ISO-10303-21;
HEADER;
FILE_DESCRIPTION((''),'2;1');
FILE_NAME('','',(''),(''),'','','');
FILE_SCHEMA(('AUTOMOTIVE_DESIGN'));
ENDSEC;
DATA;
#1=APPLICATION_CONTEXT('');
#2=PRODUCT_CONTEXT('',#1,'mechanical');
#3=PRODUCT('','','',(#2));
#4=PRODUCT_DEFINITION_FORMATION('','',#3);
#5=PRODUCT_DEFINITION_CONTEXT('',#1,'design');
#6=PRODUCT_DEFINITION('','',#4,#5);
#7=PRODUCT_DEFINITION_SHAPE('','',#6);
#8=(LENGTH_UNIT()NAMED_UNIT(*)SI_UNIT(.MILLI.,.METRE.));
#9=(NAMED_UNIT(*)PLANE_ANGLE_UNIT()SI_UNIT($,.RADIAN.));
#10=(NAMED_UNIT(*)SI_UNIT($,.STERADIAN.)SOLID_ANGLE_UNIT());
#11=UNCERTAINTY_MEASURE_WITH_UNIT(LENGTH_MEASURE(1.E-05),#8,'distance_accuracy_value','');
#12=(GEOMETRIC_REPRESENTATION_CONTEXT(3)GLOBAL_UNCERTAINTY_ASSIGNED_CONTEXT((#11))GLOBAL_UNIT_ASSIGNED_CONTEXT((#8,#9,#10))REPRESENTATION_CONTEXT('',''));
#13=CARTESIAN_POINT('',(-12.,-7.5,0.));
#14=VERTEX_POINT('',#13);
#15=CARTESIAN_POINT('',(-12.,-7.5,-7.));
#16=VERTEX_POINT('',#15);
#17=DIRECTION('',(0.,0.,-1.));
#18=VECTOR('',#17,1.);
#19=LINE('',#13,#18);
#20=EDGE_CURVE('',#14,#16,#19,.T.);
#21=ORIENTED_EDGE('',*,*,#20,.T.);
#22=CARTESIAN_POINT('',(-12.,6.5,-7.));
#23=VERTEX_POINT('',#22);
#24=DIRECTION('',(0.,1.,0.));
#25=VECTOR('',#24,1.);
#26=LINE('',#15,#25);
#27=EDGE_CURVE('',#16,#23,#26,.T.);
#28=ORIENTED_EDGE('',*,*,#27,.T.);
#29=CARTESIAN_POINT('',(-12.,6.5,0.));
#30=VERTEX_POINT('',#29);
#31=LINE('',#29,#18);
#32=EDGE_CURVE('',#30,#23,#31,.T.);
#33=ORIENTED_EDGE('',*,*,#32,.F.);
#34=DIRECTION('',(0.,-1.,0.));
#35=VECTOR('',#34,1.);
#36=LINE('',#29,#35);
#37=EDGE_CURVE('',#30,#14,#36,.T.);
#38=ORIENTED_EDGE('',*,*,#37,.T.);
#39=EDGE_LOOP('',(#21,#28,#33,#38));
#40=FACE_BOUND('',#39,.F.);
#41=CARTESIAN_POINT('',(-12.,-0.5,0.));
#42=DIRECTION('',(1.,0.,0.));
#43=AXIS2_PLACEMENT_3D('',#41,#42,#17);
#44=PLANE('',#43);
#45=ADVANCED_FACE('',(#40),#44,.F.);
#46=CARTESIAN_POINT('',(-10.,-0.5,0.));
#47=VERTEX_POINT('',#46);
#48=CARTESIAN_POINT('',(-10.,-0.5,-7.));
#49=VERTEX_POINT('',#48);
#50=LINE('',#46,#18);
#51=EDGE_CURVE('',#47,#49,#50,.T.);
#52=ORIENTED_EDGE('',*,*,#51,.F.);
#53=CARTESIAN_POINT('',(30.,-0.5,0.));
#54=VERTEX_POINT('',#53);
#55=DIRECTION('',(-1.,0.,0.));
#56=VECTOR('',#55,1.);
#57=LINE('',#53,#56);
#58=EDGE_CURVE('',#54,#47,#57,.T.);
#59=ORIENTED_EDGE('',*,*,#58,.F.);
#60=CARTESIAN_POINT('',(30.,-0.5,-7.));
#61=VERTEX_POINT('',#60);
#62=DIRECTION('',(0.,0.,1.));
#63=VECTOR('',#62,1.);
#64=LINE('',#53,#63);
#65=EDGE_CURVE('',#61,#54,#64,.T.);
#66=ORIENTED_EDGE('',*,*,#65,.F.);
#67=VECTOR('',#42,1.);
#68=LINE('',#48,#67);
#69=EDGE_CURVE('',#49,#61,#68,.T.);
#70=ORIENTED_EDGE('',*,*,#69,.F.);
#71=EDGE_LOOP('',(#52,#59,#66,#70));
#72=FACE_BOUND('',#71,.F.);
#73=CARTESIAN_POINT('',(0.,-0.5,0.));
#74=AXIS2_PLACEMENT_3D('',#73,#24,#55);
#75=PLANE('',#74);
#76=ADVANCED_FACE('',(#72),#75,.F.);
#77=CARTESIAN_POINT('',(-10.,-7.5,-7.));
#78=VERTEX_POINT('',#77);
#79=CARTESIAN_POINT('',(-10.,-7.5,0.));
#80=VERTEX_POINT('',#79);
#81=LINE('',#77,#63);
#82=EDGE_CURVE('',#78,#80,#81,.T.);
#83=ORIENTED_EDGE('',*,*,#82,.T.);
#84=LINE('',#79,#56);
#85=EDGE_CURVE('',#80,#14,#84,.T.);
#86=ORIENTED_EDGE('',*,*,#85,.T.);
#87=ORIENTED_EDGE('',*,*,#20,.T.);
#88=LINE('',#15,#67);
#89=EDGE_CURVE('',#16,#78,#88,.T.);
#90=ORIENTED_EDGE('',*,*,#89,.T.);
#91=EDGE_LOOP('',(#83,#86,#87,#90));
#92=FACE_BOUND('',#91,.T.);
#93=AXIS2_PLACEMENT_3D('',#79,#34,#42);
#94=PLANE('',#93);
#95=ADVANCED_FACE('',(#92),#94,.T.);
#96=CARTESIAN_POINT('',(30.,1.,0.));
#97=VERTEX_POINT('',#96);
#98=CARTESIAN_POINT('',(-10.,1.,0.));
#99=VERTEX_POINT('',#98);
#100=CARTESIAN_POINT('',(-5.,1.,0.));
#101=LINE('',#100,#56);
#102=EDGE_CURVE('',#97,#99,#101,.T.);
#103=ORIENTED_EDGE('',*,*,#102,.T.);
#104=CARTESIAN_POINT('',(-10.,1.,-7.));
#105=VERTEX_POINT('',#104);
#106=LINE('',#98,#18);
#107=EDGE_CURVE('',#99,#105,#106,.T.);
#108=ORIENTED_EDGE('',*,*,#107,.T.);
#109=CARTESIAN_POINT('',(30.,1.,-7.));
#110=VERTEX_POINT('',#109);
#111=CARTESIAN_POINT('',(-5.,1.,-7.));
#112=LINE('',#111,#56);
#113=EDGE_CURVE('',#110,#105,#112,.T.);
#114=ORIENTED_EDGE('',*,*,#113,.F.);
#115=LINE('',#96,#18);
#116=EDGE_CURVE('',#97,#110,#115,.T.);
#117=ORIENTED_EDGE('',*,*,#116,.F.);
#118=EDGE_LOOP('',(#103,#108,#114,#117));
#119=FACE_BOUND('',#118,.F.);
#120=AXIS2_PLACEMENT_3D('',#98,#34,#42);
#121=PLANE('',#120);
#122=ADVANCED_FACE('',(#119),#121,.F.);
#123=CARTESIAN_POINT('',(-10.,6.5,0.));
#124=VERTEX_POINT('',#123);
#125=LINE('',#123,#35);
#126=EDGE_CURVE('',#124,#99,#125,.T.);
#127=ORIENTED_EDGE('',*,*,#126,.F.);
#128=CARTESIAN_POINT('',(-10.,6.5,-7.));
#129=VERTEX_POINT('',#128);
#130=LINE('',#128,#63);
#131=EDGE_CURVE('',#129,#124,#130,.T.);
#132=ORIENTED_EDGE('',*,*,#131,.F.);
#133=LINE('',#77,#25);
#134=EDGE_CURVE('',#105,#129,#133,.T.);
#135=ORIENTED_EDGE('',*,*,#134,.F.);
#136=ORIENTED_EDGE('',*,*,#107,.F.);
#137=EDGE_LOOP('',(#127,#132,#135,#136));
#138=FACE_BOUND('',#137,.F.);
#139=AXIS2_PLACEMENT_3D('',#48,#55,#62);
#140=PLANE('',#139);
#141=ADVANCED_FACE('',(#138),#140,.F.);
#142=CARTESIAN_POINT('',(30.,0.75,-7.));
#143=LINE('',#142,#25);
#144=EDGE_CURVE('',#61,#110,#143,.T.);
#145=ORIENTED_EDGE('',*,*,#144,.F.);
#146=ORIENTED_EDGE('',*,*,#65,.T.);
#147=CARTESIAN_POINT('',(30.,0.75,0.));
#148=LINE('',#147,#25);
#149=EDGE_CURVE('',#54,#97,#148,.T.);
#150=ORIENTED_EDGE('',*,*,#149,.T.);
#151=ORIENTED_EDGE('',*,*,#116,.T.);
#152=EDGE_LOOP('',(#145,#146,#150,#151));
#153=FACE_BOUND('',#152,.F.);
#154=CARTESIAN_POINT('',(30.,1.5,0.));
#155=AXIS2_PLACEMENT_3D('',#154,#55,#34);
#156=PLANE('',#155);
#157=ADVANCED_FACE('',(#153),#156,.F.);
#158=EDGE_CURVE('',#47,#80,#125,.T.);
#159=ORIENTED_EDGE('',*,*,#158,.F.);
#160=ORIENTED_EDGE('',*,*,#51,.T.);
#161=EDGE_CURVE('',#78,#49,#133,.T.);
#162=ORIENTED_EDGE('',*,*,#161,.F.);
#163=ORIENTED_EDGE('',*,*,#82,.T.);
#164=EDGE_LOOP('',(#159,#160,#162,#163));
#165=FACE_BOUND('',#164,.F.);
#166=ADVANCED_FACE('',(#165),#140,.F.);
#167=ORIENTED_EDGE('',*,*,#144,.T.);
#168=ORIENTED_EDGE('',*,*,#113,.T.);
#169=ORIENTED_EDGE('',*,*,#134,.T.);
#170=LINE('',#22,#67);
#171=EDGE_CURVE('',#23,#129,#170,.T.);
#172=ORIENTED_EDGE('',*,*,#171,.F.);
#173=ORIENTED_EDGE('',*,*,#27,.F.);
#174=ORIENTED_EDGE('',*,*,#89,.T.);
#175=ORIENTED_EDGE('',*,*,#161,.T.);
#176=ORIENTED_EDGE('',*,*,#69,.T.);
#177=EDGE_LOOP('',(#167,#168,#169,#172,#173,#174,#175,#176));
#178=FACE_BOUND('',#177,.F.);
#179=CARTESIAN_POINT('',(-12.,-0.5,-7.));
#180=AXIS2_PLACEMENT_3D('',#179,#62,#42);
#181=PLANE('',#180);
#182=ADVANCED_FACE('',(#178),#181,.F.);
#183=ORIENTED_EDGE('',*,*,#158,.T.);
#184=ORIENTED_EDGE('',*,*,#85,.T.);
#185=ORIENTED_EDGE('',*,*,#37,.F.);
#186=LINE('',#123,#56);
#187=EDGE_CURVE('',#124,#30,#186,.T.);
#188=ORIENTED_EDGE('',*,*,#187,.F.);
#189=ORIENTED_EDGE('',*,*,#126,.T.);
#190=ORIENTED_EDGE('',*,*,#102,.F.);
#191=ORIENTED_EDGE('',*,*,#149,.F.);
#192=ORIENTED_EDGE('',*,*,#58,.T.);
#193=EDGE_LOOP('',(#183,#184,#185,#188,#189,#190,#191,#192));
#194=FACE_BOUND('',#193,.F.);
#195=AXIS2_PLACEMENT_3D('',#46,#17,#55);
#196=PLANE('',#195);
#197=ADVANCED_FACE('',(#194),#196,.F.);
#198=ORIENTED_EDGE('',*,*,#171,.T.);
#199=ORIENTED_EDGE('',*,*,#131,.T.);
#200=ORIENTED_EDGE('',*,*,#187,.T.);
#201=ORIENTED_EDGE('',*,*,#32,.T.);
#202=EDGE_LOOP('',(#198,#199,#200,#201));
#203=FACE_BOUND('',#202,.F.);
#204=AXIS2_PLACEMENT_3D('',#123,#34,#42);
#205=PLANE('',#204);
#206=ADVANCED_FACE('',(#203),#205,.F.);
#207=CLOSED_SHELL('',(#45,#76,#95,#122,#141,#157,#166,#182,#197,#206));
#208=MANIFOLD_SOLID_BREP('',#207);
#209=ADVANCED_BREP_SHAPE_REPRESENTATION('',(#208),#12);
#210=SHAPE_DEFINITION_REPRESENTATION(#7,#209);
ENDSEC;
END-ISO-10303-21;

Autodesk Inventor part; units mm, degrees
ref_plane "YZ Plane" through (0, 0, 0) normal (1, 0, 0) x (0, 1, 0)
ref_plane "XZ Plane" through (0, 0, 0) normal (0, 1, 0) x (-1, 0, 0)
ref_plane "Work Plane1" through (0, 0, 0) normal (0, 0, 1) x (1, 0, 0)
sketch "Sketch1" plane through (0, 0, 0) normal (0, 0, 1) x (1, 0, 0)
  line L0 (0, 0) -> (0, -15.5) projected
  line L1 (0, -15.5) -> (30, -15.5) projected
  line L2 (30, -0.5) -> (30, -15.5) projected
  line L3 (0, -0.5) -> (30, -0.5) projected
  line L4 (30, -0.5) -> (-10, -0.5)
  line L5 (-10, -0.5) -> (-10, 1.5)
  line L6 (-10, 1.5) -> (30, 1.5)
  line L7 (30, 1.5) -> (30, -0.5)
  point P0 (0, -0.5)
  dimension "d0" = 40
  dimension "d1" = 2
extrude "Extrusion1" add sketch "Sketch1" against normal up to surface (7 mm away) contours L4 L5 L6 L7 L3
ref_plane "Work Plane2" through (0, -16, -7) normal (0, -1, 0) x (1, 0, 0)
move faces "Move1" translate (0, -0.5, 0) faces at (16.6667, 1.5, -2.3333)
sketch "Sketch3" plane through (-10, -0.5, 0) normal (0, -1, 0) x (1, 0, 0)
  line L0 (40, 0) -> (0, 0) projected
  line L1 (0, 0) -> (-2, 0)
  line L2 (-2, 0) -> (-2, -7)
  line L3 (-2, -7) -> (0, -7)
  line L4 (0, -7) -> (0, 0)
  point P0 (10, 0)
  dimension "d19" = 2
extrude "Extrusion3" add sketch "Sketch3" along normal blind 7 and the other way blind 7
properties part number "fence"
